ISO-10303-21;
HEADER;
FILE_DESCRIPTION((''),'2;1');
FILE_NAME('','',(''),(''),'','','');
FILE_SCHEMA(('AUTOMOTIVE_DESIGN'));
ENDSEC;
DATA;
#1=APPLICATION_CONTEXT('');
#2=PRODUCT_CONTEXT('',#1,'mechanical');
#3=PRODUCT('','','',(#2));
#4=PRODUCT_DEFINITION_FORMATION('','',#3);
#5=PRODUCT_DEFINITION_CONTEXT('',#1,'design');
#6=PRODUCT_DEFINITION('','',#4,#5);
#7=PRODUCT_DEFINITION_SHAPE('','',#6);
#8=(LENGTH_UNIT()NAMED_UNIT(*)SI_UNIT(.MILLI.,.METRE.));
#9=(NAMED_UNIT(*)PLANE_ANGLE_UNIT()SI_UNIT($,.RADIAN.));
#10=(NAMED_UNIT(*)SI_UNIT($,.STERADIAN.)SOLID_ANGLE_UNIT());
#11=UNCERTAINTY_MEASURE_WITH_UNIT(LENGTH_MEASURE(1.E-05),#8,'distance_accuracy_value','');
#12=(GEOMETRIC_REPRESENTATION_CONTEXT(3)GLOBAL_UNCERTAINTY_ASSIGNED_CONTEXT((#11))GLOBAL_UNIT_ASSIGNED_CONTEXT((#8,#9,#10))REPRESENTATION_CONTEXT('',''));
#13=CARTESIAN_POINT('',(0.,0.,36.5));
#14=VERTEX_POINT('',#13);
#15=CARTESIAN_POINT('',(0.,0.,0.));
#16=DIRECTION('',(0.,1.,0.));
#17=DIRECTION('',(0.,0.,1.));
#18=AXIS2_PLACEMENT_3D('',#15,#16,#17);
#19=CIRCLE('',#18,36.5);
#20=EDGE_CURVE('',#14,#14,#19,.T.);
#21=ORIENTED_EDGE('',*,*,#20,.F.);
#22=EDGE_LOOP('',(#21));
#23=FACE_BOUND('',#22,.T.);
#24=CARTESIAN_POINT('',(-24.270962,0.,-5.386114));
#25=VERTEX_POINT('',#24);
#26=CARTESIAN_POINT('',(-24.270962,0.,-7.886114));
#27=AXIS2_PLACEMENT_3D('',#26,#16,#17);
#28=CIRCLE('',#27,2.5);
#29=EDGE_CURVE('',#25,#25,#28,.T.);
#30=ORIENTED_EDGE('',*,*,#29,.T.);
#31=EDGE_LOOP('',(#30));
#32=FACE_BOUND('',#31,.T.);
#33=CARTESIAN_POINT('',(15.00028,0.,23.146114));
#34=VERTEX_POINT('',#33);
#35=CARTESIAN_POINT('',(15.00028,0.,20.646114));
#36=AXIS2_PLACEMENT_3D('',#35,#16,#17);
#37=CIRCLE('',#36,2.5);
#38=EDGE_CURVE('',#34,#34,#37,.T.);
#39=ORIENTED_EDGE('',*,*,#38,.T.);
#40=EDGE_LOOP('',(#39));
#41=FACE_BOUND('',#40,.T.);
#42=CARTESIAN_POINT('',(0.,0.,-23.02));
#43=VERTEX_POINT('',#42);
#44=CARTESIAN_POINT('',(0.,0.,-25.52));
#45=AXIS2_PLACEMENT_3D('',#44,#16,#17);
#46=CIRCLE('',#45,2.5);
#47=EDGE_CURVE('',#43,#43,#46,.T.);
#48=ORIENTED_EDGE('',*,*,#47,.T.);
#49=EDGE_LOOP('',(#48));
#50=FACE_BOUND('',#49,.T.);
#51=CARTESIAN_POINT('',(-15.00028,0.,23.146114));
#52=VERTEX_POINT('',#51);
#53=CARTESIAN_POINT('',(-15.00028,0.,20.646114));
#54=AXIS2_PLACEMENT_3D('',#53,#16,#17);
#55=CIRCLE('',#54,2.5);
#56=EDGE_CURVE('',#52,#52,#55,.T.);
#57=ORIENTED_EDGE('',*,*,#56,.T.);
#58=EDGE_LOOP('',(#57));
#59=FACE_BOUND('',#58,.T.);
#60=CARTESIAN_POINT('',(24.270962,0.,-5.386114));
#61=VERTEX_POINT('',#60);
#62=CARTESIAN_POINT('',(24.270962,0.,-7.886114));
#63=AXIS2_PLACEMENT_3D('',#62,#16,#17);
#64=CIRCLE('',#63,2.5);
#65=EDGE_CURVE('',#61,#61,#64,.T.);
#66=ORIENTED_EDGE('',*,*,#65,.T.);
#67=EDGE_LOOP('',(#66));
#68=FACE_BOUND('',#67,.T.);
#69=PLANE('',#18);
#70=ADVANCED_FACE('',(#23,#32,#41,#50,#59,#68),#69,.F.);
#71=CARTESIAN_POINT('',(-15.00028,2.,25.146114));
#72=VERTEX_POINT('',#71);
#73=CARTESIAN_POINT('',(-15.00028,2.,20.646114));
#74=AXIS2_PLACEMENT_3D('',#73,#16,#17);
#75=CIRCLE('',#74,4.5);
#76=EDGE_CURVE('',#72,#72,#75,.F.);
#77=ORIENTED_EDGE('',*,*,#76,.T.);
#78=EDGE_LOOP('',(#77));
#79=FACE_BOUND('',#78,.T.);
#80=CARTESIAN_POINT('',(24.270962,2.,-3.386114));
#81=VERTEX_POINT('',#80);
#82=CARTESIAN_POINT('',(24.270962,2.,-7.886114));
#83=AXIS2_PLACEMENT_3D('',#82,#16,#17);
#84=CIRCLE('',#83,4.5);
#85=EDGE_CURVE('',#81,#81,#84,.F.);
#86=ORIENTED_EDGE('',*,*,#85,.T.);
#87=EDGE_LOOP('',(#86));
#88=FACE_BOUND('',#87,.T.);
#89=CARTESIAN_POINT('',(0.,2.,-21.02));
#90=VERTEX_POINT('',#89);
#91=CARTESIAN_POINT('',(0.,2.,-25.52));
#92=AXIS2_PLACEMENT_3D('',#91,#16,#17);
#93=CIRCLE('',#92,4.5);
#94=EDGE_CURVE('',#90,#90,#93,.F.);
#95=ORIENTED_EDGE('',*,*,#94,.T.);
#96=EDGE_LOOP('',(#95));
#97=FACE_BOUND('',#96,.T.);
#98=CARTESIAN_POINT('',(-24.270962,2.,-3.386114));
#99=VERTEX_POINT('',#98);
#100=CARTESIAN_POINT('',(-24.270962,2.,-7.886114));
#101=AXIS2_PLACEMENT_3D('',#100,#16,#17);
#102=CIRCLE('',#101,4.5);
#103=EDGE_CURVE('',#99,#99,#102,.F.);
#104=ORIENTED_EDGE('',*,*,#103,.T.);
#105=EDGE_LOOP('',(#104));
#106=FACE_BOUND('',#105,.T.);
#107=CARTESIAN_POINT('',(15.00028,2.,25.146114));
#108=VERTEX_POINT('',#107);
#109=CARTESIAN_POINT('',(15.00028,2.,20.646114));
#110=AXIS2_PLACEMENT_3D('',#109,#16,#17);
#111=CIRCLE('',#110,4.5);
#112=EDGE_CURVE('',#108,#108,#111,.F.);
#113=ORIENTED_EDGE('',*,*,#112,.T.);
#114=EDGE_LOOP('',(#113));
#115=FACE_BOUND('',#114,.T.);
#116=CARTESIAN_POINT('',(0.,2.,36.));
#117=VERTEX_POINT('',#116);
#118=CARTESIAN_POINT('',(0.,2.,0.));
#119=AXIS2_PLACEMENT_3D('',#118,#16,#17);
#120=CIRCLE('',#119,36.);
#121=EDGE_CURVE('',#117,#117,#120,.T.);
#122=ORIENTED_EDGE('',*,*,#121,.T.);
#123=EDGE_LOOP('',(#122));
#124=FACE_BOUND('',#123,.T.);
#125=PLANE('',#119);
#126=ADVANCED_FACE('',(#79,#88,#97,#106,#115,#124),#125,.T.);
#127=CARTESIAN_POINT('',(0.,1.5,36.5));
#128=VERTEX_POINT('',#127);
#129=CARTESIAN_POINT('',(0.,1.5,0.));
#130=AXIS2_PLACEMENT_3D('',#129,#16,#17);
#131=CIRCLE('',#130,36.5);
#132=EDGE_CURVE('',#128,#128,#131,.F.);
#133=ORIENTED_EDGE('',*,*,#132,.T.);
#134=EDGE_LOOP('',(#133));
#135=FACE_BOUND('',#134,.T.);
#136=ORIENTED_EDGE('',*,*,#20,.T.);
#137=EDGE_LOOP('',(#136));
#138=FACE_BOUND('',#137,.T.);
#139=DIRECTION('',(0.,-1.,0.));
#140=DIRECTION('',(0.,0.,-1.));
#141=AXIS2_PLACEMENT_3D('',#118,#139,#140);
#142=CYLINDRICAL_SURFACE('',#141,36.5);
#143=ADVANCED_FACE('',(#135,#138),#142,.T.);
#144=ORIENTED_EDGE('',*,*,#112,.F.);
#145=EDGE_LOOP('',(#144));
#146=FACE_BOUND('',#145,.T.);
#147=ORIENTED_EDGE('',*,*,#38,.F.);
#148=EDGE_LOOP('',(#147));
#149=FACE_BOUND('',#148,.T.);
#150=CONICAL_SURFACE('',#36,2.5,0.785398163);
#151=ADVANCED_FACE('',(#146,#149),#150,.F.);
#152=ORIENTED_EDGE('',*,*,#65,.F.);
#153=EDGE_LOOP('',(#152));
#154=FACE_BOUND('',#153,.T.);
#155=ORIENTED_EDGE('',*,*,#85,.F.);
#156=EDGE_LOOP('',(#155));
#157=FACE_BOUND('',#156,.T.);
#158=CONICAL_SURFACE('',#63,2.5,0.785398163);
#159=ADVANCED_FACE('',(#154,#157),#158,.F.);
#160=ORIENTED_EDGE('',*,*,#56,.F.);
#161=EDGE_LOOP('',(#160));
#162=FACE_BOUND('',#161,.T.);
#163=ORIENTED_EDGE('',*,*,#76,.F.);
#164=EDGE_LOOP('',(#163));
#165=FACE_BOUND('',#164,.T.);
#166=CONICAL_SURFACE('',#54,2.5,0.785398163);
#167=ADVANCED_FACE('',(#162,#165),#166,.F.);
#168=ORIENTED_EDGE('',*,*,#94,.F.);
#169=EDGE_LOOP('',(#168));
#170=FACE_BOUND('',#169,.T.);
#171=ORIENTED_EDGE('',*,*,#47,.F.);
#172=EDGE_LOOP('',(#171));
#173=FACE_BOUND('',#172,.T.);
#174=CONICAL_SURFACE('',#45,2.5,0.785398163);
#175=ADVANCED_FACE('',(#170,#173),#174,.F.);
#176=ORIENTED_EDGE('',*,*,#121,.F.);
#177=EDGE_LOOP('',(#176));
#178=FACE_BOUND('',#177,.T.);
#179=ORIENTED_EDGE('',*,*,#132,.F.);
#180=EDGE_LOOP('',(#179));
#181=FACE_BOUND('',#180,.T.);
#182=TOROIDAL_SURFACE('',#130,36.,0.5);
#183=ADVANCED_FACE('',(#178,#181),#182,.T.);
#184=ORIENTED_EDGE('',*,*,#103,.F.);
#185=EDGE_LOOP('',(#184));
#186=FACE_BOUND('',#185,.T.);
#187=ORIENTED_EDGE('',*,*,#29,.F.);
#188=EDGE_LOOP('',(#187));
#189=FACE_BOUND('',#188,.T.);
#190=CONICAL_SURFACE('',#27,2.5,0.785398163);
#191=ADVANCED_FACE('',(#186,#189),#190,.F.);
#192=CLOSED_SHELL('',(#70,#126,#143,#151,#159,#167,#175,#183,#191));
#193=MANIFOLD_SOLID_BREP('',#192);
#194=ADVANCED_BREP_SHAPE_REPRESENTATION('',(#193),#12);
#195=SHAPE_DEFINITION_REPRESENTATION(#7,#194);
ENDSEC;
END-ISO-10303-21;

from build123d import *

# Parameters (mm, degrees)
SKETCH2_R           = 36.5
SKETCH2_R_2         = 2.5
BOSS_EXTRUDE1_DEPTH = 2
CHAMFER1_SIZE       = 2
FILLET1_R           = 0.5


with BuildPart() as part:
    # Sketch2 → Boss-Extrude1 (new body)
    with BuildSketch(Plane(origin=(0, 0, 0), x_dir=(1, 0, 0), z_dir=(0, 1, 0))):
        with Locations(Location((0, 0, 0), (0, 0, 270))):
            Circle(SKETCH2_R)
        with Locations(Location((0, 25.52, 0), (0, 0, 270))):
            Circle(SKETCH2_R_2, mode=Mode.SUBTRACT)
        with Locations(Location((24.270962296, 7.886113696, 0), (0, 0, 270))):
            Circle(SKETCH2_R_2, mode=Mode.SUBTRACT)
        with Locations(Location((15.000279639, -20.646113696, 0), (0, 0, 270))):
            Circle(SKETCH2_R_2, mode=Mode.SUBTRACT)
        with Locations(Location((-15.000279639, -20.646113696, 0), (0, 0, 270))):
            Circle(SKETCH2_R_2, mode=Mode.SUBTRACT)
        with Locations(Location((-24.270962296, 7.886113696, 0), (0, 0, 270))):
            Circle(SKETCH2_R_2, mode=Mode.SUBTRACT)
    extrude(amount=BOSS_EXTRUDE1_DEPTH)

    # Chamfer1
    chamfer1_edges = [part.edges().sort_by_distance(p)[0] for p in [
        (-24.270962296, 2, -10.386113696),
        (-15.000279639, 2, 18.146113696),
        (15.000279639, 2, 18.146113696),
        (24.270962296, 2, -10.386113696),
        (0, 2, -28.02),
    ]]
    chamfer(chamfer1_edges, length=CHAMFER1_SIZE - 0.0001)  # a hair under: the kernel refuses the full size

    # Fillet1
    fillet1_edges = [part.edges().sort_by_distance(p)[0] for p in [
        (0, 2, -36.5),
    ]]
    fillet(fillet1_edges, radius=FILLET1_R)


solid = part.part
